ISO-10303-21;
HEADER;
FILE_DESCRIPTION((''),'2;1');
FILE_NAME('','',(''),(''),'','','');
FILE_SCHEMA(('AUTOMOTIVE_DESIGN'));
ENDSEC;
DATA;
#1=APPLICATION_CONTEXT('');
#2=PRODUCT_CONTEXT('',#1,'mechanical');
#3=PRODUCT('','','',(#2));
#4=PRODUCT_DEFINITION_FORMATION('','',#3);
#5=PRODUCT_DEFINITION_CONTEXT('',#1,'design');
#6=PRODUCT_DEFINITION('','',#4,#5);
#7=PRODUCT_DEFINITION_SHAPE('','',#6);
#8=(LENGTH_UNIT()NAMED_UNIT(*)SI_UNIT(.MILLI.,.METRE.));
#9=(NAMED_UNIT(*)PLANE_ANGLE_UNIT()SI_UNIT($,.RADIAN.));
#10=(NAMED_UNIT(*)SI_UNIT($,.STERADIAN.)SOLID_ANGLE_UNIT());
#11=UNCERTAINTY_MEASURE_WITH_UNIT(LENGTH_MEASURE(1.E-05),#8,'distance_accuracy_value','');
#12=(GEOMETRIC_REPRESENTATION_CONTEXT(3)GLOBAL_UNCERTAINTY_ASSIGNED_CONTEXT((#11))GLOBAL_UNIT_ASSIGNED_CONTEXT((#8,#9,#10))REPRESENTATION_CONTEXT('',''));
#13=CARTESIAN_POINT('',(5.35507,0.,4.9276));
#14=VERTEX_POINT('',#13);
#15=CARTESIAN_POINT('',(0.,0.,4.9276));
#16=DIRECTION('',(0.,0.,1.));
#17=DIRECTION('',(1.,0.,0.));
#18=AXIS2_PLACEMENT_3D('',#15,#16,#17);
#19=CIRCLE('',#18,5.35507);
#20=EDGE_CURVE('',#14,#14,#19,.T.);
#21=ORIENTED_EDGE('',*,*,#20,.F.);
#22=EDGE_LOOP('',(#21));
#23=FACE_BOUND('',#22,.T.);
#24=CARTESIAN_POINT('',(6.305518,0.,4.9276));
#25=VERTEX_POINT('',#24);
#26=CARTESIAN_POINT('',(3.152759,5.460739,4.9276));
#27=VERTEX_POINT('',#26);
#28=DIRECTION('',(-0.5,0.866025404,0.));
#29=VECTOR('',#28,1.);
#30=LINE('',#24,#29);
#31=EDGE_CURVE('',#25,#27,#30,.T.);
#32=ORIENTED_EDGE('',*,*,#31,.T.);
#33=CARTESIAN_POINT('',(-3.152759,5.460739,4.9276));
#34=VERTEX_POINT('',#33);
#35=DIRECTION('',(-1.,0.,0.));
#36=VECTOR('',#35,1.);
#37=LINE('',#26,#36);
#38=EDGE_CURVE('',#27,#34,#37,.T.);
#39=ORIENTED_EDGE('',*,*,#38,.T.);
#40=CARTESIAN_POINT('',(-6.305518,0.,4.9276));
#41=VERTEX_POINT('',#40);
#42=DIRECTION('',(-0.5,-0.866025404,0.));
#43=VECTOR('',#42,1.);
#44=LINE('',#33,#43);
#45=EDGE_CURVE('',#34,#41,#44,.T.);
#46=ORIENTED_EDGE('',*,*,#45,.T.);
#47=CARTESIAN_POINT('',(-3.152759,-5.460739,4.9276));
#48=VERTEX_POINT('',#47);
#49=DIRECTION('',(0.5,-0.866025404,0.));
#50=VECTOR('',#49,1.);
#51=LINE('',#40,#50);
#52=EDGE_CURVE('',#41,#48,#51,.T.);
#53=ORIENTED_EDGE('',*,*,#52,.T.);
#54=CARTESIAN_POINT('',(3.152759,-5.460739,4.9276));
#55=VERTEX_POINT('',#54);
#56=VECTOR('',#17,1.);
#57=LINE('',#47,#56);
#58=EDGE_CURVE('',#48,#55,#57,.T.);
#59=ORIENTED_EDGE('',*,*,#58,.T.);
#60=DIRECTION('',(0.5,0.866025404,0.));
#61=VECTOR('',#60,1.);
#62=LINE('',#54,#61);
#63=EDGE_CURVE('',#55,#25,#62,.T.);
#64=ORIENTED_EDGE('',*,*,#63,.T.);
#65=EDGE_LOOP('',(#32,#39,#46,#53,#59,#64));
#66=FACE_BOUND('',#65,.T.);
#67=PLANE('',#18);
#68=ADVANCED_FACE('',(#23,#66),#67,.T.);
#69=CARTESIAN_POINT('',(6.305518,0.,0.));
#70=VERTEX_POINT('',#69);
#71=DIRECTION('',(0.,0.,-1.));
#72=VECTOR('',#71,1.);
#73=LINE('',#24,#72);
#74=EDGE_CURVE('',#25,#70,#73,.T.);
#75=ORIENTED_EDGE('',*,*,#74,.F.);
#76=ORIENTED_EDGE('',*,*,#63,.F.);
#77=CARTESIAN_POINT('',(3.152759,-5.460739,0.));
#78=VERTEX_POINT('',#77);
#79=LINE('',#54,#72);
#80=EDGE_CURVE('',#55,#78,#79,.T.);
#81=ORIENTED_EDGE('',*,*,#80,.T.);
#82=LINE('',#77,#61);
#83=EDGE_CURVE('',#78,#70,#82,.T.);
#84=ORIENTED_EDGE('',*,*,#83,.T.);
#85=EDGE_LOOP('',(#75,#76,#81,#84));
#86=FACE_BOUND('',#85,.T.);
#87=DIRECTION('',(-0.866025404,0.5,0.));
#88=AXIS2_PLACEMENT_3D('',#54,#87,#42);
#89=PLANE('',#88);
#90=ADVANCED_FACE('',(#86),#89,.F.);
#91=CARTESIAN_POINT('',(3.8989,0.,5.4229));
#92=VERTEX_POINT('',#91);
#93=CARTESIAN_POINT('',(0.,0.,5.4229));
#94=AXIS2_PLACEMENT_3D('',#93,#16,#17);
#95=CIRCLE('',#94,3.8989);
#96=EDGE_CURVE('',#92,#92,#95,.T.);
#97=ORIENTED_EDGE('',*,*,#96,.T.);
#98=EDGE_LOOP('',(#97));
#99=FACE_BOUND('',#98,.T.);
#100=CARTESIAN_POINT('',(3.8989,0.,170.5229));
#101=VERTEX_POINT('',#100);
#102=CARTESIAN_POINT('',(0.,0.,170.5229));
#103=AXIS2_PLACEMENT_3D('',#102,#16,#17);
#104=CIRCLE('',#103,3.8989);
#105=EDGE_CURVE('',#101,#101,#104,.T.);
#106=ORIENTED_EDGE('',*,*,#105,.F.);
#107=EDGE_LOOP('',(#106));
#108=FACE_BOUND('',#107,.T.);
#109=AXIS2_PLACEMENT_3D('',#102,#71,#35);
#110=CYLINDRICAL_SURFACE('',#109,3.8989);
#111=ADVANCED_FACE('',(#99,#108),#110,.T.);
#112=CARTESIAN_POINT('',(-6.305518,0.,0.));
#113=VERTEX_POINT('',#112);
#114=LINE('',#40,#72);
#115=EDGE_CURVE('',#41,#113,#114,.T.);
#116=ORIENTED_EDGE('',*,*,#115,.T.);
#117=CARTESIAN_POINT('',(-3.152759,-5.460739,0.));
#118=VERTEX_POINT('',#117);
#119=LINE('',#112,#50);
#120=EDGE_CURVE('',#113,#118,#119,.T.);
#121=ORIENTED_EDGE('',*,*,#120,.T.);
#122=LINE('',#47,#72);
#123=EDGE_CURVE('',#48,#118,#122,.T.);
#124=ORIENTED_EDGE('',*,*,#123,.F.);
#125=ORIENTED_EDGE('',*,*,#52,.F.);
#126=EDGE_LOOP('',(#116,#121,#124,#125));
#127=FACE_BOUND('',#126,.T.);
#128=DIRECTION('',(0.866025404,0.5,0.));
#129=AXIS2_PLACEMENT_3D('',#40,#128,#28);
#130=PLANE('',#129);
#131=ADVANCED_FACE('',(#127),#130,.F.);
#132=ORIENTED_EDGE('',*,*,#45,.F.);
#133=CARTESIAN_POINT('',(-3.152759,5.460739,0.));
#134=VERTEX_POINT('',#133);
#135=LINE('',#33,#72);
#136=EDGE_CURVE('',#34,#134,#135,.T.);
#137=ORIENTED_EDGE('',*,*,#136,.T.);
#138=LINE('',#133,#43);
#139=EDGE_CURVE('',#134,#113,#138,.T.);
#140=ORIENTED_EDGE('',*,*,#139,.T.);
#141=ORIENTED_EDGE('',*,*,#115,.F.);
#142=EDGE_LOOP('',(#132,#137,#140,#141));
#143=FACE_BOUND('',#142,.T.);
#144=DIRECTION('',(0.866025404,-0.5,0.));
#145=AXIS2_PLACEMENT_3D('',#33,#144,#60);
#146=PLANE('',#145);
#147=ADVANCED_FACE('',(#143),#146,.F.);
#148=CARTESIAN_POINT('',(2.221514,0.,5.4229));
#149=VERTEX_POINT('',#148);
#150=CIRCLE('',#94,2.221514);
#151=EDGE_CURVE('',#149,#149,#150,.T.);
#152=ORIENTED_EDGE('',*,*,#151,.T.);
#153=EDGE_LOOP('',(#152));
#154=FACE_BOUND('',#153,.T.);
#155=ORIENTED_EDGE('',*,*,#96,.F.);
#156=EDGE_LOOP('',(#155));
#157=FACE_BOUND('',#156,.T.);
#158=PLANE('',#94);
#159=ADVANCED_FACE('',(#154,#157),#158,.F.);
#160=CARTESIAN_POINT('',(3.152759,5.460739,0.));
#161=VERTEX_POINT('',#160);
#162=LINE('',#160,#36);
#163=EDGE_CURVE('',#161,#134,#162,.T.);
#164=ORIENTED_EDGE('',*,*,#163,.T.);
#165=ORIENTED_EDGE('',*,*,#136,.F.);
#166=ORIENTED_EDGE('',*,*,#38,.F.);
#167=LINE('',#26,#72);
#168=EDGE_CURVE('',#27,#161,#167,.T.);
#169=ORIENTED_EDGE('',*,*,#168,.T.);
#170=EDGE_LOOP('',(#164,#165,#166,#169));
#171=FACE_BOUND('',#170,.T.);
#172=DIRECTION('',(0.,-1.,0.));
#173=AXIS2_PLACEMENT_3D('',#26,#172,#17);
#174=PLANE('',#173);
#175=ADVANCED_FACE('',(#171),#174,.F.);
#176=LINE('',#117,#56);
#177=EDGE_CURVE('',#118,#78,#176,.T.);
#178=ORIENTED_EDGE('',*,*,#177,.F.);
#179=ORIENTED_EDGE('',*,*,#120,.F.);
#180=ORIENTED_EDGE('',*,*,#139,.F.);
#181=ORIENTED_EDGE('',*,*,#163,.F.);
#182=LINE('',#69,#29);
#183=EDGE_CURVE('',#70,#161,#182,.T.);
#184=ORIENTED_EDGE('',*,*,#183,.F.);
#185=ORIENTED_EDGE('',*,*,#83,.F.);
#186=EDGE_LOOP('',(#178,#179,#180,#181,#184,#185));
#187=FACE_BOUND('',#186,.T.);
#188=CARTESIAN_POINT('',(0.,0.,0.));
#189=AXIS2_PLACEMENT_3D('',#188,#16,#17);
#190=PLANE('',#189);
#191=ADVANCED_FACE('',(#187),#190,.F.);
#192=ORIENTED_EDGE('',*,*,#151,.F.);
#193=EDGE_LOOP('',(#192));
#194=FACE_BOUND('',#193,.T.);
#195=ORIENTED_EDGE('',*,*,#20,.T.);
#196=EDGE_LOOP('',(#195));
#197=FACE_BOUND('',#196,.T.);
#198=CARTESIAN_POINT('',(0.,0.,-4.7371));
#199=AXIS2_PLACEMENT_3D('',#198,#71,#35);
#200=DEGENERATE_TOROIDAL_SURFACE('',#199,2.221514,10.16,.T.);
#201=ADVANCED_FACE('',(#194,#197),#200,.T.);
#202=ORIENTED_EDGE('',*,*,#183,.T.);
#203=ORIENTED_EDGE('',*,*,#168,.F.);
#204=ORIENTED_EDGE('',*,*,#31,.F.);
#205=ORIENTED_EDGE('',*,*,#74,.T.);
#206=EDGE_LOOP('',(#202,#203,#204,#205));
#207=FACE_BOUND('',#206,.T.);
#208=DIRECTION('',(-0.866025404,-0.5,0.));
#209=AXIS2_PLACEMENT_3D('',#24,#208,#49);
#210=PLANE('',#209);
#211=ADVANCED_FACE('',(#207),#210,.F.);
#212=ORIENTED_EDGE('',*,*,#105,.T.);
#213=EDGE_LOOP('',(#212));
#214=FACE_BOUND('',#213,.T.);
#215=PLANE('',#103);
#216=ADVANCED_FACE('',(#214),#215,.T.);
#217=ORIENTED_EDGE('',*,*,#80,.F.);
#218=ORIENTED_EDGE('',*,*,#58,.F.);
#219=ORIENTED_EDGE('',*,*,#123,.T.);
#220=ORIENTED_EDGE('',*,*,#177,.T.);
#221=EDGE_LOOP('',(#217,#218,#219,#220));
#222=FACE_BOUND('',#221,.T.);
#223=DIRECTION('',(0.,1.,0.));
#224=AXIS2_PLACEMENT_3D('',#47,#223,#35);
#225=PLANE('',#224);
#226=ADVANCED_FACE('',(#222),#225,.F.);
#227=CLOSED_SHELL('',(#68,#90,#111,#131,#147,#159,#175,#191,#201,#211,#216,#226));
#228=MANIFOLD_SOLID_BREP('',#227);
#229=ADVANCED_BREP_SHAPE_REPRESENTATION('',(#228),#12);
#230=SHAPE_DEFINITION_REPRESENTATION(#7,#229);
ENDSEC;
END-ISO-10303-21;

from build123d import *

# Parameters (mm, degrees)
BOSS_EXTRUDE1_DEPTH = 4.9276
SKETCH2_R           = 5.355070432
BOSS_EXTRUDE2_DEPTH = 0.4953
FILLET1_R           = 10.16
SKETCH6_R           = 3.8989
BOSS_EXTRUDE3_DEPTH = 165.1


with BuildPart() as part:
    # Sketch1 → Boss-Extrude1 (new body)
    with BuildSketch(Plane.XY):
        Polygon((6.305518095, 0), (3.152759047, 5.460738854), (-3.152759047, 5.460738854), (-6.305518095, 0), (-3.152759047, -5.460738854), (3.152759047, -5.460738854), align=None)
    extrude(amount=BOSS_EXTRUDE1_DEPTH)

    # Sketch2 → Boss-Extrude2 (add)
    with BuildSketch(Plane.XY.offset(4.9276)):
        Circle(SKETCH2_R)
    extrude(amount=BOSS_EXTRUDE2_DEPTH)

    # Fillet1
    # the kernel refuses this fillet: 10.16 mm, written as the material it takes off along each edge
    with BuildSketch(Plane(origin=(0, 0, 5.4229), x_dir=(1, 0, 0), z_dir=(0, -1, 0))) as fillet1_piece_1:
        with BuildLine():
            CenterArc((2.22151432, -10.16), FILLET1_R, 72.035909036, 17.964090964)
            Line((2.22151432, 0), (2.22151432, 0.2032))
            Line((2.22151432, 0.2032), (5.355070432, 0.2032))
            Line((5.355070432, 0.2032), (5.558270432, 0))
            ThreePointArc((5.558270432, 0), (5.558270432, -0.24765), (5.417741555, -0.302006))
            Line((5.417741555, -0.302006), (5.355070432, -0.4953))
        make_face()
    revolve(axis=Axis((0, 0, 5.4229), (0, 0, 1)), mode=Mode.SUBTRACT)

    # Sketch6 → Boss-Extrude3 (add)
    with BuildSketch(Plane.XY.offset(5.4229)):
        Circle(SKETCH6_R)
    extrude(amount=BOSS_EXTRUDE3_DEPTH)


solid = part.part
